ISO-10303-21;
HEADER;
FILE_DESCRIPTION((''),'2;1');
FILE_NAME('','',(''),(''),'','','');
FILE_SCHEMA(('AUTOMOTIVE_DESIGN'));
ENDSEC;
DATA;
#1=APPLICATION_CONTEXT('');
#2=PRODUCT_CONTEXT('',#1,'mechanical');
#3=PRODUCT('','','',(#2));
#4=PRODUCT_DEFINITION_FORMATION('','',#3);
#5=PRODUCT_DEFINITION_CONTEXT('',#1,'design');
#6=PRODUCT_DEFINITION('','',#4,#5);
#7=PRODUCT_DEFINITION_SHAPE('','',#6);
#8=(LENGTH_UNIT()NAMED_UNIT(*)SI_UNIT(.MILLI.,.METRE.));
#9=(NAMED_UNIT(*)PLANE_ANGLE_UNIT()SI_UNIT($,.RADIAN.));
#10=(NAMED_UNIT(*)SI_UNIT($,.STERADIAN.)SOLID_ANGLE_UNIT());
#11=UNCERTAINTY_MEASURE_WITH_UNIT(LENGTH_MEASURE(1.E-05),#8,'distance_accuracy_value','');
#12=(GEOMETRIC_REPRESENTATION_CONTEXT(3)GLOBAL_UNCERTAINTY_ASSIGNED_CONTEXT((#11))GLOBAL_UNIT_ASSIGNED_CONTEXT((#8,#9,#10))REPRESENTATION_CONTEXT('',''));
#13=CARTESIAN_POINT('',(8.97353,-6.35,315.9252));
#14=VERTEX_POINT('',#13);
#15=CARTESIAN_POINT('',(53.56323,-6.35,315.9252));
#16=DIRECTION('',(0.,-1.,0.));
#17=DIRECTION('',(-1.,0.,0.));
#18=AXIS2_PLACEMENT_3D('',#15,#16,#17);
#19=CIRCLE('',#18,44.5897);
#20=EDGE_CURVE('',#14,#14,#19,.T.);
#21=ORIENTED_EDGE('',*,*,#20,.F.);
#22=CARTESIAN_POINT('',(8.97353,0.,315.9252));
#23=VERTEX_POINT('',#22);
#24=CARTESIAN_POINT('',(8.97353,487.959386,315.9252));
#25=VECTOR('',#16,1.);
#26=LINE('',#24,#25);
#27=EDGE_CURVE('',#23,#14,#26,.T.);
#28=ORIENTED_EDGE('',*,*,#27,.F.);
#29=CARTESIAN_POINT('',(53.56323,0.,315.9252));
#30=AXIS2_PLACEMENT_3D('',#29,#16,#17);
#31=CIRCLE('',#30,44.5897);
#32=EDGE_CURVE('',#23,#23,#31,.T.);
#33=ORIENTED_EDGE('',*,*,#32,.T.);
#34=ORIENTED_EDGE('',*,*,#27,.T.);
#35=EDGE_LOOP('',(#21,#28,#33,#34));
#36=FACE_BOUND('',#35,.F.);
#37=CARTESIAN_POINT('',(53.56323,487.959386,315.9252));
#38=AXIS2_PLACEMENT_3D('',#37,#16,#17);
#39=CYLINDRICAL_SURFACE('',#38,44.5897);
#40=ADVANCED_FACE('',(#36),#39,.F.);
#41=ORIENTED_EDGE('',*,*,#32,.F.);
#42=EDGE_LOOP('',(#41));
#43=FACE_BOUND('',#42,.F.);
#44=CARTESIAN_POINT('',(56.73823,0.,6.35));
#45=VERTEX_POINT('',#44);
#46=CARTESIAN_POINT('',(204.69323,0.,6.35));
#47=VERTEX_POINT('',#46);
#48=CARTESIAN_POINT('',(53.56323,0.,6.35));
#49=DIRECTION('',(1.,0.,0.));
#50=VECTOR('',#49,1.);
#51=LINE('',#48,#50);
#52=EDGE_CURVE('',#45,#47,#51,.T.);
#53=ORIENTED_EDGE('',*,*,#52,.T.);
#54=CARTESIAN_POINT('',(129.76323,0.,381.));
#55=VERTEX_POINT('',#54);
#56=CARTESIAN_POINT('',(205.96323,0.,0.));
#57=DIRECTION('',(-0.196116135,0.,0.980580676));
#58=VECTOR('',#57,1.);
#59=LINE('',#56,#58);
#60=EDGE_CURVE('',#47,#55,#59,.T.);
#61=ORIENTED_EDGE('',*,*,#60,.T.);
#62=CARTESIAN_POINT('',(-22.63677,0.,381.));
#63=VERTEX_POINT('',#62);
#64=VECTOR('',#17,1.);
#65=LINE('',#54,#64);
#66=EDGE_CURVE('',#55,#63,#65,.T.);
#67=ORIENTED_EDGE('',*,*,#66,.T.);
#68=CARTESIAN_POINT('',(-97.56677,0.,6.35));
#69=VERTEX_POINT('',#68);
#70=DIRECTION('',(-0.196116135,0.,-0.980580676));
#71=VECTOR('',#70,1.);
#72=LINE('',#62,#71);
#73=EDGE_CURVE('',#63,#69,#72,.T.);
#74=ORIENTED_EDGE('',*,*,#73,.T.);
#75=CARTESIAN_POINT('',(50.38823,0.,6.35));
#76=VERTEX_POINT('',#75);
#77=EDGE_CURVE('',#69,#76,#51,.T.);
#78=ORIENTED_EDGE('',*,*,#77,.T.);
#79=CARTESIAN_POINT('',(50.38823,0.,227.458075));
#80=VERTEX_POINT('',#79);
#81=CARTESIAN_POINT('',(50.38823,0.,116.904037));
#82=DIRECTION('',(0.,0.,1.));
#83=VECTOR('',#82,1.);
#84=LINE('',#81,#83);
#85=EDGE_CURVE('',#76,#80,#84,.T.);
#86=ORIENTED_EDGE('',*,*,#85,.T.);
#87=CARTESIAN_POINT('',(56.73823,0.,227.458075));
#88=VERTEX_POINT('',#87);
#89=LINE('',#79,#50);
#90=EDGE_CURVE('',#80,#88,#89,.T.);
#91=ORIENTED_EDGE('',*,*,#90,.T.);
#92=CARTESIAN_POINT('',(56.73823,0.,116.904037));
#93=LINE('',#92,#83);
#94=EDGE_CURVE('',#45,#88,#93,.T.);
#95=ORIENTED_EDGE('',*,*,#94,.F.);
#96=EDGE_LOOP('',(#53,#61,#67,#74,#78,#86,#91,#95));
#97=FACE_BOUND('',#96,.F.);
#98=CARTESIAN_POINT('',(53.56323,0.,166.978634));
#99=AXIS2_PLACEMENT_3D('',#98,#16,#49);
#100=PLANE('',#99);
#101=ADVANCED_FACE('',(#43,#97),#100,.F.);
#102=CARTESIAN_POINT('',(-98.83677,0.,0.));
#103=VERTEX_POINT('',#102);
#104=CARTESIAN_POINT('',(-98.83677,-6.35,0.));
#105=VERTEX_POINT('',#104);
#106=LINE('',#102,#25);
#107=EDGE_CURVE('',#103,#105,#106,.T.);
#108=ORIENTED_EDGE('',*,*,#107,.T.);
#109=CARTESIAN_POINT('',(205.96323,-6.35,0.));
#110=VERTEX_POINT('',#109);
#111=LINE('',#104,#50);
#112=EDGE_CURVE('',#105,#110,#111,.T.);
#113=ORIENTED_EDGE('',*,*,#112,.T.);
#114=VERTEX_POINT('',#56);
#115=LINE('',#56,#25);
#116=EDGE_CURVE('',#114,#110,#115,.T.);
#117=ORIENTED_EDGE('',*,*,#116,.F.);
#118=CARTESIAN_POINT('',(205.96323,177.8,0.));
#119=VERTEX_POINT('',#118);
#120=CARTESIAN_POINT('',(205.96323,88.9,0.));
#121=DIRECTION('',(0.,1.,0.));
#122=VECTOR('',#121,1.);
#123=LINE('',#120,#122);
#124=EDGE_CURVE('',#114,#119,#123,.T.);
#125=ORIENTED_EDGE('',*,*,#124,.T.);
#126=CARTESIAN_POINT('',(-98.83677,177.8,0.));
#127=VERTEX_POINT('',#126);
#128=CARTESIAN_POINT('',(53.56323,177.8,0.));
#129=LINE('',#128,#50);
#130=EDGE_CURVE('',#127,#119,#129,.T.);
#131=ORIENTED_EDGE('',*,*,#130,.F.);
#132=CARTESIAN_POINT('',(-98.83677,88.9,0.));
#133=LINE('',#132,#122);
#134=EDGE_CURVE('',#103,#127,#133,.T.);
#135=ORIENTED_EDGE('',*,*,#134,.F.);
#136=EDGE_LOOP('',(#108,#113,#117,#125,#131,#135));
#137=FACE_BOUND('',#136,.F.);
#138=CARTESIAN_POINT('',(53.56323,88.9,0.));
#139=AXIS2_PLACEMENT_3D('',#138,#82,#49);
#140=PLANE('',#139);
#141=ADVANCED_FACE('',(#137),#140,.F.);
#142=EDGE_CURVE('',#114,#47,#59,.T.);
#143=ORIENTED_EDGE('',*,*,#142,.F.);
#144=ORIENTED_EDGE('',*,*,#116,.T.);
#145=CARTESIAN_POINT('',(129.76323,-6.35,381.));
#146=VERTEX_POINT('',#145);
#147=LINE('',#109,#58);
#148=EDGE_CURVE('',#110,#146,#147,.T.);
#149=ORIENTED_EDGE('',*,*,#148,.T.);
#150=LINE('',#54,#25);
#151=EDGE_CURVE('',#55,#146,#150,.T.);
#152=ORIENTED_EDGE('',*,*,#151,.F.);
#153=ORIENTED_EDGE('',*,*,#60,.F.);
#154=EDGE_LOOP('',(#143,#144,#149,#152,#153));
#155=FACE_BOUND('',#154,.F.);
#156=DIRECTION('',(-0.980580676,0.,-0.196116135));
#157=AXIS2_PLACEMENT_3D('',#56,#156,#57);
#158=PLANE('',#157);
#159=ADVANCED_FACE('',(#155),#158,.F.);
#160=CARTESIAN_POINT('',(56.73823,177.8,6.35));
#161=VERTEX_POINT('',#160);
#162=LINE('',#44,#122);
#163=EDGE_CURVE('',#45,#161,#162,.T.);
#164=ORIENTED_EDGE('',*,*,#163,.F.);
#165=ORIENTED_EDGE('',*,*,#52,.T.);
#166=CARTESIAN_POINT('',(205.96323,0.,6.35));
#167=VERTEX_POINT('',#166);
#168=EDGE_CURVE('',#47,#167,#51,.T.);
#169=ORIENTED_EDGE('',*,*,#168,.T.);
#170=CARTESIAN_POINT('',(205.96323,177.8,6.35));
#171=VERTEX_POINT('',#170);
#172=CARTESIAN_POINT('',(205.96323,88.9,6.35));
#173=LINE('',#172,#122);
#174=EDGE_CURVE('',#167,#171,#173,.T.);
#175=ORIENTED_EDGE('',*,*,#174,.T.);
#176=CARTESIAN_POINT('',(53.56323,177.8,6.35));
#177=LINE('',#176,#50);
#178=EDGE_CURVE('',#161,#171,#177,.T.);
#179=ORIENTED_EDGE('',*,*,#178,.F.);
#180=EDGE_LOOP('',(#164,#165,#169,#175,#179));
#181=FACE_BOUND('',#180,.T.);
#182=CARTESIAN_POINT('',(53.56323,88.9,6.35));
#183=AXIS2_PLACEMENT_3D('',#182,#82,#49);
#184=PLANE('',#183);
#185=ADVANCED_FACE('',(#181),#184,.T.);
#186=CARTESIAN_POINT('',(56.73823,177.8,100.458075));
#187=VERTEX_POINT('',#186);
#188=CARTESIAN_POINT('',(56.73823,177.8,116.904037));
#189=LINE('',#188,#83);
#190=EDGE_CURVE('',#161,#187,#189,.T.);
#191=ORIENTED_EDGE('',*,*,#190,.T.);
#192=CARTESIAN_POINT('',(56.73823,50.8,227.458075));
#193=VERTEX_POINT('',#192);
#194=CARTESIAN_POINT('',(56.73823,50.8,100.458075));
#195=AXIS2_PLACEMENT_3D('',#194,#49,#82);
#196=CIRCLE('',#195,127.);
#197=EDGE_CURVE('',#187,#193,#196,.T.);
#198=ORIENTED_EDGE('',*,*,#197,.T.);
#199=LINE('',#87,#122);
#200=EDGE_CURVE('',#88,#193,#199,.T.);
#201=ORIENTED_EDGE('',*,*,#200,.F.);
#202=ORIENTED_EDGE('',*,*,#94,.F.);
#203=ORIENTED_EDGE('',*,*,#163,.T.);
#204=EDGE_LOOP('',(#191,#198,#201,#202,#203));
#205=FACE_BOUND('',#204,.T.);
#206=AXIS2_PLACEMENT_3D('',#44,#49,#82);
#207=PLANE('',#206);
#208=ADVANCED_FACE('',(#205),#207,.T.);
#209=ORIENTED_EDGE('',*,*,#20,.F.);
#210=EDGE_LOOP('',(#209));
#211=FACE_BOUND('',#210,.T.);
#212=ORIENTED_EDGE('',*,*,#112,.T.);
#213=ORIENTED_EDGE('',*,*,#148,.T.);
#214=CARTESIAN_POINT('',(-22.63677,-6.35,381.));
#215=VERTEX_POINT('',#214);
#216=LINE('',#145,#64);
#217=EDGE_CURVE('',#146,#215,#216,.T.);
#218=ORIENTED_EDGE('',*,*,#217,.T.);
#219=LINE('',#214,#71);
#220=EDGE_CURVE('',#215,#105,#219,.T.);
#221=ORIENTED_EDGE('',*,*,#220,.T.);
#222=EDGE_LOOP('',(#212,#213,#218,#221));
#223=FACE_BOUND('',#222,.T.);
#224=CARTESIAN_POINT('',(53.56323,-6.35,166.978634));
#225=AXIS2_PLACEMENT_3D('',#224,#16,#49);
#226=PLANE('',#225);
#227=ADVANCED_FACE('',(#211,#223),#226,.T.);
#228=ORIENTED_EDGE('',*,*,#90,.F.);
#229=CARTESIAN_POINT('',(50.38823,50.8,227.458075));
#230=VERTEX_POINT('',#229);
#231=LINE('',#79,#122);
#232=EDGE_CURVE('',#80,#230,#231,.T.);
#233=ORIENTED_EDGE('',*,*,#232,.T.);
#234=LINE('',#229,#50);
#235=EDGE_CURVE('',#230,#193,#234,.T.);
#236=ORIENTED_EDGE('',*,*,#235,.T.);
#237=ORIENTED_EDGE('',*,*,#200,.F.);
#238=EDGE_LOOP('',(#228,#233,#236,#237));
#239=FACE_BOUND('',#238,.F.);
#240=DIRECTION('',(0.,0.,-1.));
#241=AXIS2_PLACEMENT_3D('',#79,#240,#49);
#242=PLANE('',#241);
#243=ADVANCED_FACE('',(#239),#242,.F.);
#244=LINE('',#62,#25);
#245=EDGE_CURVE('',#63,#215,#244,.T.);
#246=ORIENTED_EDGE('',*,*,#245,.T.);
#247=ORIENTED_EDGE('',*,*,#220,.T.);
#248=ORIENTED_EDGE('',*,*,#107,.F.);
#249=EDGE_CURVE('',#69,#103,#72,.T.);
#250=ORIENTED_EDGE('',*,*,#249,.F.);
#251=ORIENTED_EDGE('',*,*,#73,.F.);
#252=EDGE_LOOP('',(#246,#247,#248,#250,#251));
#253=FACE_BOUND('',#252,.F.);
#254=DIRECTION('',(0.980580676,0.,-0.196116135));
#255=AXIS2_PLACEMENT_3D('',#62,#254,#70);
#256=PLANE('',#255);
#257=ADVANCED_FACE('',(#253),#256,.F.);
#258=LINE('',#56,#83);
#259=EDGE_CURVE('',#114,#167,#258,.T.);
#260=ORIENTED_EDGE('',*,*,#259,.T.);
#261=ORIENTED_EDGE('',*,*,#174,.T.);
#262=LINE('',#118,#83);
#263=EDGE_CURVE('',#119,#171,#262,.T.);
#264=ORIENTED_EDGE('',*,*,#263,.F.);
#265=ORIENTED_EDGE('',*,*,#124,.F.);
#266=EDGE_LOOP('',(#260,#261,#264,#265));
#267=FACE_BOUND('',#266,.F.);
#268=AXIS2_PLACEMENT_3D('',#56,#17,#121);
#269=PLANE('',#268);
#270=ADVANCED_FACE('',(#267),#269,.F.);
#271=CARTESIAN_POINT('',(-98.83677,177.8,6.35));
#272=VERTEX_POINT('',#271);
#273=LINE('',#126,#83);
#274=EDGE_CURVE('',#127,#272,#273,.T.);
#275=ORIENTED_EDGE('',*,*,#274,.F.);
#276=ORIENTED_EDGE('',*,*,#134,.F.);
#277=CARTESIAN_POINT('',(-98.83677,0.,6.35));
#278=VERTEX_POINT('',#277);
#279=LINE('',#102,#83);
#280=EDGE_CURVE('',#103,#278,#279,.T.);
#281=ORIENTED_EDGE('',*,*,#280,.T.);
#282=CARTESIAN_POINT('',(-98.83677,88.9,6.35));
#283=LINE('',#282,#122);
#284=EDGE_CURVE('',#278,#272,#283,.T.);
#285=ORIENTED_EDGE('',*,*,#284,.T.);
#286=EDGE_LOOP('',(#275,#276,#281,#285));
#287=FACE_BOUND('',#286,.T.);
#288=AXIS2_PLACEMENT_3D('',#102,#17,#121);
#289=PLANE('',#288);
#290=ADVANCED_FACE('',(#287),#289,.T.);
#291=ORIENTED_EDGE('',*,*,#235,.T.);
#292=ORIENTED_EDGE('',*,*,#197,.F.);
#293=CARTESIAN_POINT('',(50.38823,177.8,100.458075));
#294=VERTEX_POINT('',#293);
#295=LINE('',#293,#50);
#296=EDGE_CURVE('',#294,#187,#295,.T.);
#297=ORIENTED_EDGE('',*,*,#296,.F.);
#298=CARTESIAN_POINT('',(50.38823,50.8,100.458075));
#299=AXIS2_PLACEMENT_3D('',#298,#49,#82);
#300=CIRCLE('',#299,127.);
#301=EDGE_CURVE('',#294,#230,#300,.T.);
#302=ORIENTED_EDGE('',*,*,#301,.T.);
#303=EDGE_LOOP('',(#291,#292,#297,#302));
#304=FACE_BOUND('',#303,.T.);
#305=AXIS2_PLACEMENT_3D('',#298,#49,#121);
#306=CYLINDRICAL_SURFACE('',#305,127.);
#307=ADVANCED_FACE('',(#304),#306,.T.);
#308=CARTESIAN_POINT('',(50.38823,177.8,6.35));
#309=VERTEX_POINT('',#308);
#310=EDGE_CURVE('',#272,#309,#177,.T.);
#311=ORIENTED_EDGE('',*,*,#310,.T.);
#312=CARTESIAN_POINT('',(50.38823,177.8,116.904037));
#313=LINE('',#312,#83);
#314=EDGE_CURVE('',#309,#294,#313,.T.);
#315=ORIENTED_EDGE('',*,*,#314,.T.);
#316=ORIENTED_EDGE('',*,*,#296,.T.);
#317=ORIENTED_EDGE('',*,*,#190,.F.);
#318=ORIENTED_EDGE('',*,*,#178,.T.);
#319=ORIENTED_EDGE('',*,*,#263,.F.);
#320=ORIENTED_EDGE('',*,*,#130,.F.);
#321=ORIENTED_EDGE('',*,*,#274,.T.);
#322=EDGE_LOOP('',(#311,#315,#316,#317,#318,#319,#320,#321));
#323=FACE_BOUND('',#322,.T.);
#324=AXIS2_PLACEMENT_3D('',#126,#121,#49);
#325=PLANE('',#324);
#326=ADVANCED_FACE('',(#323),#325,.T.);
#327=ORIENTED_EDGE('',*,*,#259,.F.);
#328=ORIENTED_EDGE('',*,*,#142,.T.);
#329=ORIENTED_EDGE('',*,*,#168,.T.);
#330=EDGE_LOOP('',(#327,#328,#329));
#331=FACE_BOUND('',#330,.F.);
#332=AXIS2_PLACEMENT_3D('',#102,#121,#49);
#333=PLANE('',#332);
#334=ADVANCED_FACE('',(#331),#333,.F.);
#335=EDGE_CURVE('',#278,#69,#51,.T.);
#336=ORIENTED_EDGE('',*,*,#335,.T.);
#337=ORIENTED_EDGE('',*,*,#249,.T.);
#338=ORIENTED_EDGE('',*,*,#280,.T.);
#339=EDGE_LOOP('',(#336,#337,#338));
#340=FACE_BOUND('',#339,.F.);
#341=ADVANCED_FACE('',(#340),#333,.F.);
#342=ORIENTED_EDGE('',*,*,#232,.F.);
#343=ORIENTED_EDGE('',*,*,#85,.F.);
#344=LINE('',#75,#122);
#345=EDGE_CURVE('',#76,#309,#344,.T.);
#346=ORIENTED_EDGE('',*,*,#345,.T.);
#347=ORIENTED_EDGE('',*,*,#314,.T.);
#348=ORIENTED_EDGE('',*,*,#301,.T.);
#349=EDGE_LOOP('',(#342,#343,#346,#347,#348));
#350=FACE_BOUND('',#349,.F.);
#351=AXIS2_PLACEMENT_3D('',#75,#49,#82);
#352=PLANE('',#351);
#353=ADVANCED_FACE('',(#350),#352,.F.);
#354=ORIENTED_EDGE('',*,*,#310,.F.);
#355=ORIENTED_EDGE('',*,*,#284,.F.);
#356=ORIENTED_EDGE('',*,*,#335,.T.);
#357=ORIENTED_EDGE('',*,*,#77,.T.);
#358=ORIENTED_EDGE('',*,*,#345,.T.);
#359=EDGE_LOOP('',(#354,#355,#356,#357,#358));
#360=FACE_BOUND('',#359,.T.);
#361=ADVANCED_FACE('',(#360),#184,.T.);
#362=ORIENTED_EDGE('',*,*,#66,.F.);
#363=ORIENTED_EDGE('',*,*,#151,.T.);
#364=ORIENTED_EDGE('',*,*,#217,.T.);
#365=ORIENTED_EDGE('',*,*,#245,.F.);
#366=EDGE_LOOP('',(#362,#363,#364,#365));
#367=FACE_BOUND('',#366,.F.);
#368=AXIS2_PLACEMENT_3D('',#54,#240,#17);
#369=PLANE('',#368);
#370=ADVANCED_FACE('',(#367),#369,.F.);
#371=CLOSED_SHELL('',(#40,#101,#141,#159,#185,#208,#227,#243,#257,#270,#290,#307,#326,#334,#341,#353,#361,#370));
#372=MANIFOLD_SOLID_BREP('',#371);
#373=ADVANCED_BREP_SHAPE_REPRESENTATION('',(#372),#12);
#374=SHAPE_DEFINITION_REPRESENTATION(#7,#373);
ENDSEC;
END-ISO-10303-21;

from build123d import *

# Parameters (mm, degrees)
F3_DEPTH = 6.35
F4_D     = 89.1794
F5_W     = 304.8
F5_H     = 177.8
F6_DEPTH = 6.35
F7_W     = 3.175
F7_H     = 221.1080746889
F8_DEPTH = 177.8
F9_R     = 127


# Not quite as in the source:
# - a variable given as a bare number and used for a length is read in inches; the dataset says mm whatever the document's units were


with BuildPart() as f3:
    # F1 (on Front) → F3 (new body)
    with BuildSketch(Plane.XZ):
        Polygon((129.7632297397, 381), (-22.6367702603, 381), (-98.8367702603, 0), (205.9632297397, 0), align=None)
    extrude(amount=F3_DEPTH)

    # F4 (through all)
    with Locations(Plane(origin=(0, 0, 0), x_dir=(1, 0, 0), z_dir=(0, 1, 0))):
        with Locations((53.5632297397, -315.9252)):
            Hole(F4_D / 2)

    # F5 (on Top) → F6 (join)
    with BuildSketch(Plane.XY):
        with Locations((53.5632297397, 88.9)):
            Rectangle(F5_W, F5_H)
    extrude(amount=F6_DEPTH)

    # F7 (on face) → F8 (join)
    with BuildSketch(Plane(origin=(0, 0, 0), x_dir=(-1, 0, 0), z_dir=(0, 1, 0))):
        with Locations((-55.1507297397, 116.9040373445)):
            Rectangle(F7_W, F7_H)
        with Locations((-51.9757297397, 116.9040373445)):
            Rectangle(F7_W, F7_H)
    extrude(amount=F8_DEPTH)

    # F9
    f9_edges = [f3.edges().sort_by_distance(p)[0] for p in [
        (53.56323, 177.8, 227.458075),
    ]]
    fillet(f9_edges, radius=F9_R)


solid = f3.part
